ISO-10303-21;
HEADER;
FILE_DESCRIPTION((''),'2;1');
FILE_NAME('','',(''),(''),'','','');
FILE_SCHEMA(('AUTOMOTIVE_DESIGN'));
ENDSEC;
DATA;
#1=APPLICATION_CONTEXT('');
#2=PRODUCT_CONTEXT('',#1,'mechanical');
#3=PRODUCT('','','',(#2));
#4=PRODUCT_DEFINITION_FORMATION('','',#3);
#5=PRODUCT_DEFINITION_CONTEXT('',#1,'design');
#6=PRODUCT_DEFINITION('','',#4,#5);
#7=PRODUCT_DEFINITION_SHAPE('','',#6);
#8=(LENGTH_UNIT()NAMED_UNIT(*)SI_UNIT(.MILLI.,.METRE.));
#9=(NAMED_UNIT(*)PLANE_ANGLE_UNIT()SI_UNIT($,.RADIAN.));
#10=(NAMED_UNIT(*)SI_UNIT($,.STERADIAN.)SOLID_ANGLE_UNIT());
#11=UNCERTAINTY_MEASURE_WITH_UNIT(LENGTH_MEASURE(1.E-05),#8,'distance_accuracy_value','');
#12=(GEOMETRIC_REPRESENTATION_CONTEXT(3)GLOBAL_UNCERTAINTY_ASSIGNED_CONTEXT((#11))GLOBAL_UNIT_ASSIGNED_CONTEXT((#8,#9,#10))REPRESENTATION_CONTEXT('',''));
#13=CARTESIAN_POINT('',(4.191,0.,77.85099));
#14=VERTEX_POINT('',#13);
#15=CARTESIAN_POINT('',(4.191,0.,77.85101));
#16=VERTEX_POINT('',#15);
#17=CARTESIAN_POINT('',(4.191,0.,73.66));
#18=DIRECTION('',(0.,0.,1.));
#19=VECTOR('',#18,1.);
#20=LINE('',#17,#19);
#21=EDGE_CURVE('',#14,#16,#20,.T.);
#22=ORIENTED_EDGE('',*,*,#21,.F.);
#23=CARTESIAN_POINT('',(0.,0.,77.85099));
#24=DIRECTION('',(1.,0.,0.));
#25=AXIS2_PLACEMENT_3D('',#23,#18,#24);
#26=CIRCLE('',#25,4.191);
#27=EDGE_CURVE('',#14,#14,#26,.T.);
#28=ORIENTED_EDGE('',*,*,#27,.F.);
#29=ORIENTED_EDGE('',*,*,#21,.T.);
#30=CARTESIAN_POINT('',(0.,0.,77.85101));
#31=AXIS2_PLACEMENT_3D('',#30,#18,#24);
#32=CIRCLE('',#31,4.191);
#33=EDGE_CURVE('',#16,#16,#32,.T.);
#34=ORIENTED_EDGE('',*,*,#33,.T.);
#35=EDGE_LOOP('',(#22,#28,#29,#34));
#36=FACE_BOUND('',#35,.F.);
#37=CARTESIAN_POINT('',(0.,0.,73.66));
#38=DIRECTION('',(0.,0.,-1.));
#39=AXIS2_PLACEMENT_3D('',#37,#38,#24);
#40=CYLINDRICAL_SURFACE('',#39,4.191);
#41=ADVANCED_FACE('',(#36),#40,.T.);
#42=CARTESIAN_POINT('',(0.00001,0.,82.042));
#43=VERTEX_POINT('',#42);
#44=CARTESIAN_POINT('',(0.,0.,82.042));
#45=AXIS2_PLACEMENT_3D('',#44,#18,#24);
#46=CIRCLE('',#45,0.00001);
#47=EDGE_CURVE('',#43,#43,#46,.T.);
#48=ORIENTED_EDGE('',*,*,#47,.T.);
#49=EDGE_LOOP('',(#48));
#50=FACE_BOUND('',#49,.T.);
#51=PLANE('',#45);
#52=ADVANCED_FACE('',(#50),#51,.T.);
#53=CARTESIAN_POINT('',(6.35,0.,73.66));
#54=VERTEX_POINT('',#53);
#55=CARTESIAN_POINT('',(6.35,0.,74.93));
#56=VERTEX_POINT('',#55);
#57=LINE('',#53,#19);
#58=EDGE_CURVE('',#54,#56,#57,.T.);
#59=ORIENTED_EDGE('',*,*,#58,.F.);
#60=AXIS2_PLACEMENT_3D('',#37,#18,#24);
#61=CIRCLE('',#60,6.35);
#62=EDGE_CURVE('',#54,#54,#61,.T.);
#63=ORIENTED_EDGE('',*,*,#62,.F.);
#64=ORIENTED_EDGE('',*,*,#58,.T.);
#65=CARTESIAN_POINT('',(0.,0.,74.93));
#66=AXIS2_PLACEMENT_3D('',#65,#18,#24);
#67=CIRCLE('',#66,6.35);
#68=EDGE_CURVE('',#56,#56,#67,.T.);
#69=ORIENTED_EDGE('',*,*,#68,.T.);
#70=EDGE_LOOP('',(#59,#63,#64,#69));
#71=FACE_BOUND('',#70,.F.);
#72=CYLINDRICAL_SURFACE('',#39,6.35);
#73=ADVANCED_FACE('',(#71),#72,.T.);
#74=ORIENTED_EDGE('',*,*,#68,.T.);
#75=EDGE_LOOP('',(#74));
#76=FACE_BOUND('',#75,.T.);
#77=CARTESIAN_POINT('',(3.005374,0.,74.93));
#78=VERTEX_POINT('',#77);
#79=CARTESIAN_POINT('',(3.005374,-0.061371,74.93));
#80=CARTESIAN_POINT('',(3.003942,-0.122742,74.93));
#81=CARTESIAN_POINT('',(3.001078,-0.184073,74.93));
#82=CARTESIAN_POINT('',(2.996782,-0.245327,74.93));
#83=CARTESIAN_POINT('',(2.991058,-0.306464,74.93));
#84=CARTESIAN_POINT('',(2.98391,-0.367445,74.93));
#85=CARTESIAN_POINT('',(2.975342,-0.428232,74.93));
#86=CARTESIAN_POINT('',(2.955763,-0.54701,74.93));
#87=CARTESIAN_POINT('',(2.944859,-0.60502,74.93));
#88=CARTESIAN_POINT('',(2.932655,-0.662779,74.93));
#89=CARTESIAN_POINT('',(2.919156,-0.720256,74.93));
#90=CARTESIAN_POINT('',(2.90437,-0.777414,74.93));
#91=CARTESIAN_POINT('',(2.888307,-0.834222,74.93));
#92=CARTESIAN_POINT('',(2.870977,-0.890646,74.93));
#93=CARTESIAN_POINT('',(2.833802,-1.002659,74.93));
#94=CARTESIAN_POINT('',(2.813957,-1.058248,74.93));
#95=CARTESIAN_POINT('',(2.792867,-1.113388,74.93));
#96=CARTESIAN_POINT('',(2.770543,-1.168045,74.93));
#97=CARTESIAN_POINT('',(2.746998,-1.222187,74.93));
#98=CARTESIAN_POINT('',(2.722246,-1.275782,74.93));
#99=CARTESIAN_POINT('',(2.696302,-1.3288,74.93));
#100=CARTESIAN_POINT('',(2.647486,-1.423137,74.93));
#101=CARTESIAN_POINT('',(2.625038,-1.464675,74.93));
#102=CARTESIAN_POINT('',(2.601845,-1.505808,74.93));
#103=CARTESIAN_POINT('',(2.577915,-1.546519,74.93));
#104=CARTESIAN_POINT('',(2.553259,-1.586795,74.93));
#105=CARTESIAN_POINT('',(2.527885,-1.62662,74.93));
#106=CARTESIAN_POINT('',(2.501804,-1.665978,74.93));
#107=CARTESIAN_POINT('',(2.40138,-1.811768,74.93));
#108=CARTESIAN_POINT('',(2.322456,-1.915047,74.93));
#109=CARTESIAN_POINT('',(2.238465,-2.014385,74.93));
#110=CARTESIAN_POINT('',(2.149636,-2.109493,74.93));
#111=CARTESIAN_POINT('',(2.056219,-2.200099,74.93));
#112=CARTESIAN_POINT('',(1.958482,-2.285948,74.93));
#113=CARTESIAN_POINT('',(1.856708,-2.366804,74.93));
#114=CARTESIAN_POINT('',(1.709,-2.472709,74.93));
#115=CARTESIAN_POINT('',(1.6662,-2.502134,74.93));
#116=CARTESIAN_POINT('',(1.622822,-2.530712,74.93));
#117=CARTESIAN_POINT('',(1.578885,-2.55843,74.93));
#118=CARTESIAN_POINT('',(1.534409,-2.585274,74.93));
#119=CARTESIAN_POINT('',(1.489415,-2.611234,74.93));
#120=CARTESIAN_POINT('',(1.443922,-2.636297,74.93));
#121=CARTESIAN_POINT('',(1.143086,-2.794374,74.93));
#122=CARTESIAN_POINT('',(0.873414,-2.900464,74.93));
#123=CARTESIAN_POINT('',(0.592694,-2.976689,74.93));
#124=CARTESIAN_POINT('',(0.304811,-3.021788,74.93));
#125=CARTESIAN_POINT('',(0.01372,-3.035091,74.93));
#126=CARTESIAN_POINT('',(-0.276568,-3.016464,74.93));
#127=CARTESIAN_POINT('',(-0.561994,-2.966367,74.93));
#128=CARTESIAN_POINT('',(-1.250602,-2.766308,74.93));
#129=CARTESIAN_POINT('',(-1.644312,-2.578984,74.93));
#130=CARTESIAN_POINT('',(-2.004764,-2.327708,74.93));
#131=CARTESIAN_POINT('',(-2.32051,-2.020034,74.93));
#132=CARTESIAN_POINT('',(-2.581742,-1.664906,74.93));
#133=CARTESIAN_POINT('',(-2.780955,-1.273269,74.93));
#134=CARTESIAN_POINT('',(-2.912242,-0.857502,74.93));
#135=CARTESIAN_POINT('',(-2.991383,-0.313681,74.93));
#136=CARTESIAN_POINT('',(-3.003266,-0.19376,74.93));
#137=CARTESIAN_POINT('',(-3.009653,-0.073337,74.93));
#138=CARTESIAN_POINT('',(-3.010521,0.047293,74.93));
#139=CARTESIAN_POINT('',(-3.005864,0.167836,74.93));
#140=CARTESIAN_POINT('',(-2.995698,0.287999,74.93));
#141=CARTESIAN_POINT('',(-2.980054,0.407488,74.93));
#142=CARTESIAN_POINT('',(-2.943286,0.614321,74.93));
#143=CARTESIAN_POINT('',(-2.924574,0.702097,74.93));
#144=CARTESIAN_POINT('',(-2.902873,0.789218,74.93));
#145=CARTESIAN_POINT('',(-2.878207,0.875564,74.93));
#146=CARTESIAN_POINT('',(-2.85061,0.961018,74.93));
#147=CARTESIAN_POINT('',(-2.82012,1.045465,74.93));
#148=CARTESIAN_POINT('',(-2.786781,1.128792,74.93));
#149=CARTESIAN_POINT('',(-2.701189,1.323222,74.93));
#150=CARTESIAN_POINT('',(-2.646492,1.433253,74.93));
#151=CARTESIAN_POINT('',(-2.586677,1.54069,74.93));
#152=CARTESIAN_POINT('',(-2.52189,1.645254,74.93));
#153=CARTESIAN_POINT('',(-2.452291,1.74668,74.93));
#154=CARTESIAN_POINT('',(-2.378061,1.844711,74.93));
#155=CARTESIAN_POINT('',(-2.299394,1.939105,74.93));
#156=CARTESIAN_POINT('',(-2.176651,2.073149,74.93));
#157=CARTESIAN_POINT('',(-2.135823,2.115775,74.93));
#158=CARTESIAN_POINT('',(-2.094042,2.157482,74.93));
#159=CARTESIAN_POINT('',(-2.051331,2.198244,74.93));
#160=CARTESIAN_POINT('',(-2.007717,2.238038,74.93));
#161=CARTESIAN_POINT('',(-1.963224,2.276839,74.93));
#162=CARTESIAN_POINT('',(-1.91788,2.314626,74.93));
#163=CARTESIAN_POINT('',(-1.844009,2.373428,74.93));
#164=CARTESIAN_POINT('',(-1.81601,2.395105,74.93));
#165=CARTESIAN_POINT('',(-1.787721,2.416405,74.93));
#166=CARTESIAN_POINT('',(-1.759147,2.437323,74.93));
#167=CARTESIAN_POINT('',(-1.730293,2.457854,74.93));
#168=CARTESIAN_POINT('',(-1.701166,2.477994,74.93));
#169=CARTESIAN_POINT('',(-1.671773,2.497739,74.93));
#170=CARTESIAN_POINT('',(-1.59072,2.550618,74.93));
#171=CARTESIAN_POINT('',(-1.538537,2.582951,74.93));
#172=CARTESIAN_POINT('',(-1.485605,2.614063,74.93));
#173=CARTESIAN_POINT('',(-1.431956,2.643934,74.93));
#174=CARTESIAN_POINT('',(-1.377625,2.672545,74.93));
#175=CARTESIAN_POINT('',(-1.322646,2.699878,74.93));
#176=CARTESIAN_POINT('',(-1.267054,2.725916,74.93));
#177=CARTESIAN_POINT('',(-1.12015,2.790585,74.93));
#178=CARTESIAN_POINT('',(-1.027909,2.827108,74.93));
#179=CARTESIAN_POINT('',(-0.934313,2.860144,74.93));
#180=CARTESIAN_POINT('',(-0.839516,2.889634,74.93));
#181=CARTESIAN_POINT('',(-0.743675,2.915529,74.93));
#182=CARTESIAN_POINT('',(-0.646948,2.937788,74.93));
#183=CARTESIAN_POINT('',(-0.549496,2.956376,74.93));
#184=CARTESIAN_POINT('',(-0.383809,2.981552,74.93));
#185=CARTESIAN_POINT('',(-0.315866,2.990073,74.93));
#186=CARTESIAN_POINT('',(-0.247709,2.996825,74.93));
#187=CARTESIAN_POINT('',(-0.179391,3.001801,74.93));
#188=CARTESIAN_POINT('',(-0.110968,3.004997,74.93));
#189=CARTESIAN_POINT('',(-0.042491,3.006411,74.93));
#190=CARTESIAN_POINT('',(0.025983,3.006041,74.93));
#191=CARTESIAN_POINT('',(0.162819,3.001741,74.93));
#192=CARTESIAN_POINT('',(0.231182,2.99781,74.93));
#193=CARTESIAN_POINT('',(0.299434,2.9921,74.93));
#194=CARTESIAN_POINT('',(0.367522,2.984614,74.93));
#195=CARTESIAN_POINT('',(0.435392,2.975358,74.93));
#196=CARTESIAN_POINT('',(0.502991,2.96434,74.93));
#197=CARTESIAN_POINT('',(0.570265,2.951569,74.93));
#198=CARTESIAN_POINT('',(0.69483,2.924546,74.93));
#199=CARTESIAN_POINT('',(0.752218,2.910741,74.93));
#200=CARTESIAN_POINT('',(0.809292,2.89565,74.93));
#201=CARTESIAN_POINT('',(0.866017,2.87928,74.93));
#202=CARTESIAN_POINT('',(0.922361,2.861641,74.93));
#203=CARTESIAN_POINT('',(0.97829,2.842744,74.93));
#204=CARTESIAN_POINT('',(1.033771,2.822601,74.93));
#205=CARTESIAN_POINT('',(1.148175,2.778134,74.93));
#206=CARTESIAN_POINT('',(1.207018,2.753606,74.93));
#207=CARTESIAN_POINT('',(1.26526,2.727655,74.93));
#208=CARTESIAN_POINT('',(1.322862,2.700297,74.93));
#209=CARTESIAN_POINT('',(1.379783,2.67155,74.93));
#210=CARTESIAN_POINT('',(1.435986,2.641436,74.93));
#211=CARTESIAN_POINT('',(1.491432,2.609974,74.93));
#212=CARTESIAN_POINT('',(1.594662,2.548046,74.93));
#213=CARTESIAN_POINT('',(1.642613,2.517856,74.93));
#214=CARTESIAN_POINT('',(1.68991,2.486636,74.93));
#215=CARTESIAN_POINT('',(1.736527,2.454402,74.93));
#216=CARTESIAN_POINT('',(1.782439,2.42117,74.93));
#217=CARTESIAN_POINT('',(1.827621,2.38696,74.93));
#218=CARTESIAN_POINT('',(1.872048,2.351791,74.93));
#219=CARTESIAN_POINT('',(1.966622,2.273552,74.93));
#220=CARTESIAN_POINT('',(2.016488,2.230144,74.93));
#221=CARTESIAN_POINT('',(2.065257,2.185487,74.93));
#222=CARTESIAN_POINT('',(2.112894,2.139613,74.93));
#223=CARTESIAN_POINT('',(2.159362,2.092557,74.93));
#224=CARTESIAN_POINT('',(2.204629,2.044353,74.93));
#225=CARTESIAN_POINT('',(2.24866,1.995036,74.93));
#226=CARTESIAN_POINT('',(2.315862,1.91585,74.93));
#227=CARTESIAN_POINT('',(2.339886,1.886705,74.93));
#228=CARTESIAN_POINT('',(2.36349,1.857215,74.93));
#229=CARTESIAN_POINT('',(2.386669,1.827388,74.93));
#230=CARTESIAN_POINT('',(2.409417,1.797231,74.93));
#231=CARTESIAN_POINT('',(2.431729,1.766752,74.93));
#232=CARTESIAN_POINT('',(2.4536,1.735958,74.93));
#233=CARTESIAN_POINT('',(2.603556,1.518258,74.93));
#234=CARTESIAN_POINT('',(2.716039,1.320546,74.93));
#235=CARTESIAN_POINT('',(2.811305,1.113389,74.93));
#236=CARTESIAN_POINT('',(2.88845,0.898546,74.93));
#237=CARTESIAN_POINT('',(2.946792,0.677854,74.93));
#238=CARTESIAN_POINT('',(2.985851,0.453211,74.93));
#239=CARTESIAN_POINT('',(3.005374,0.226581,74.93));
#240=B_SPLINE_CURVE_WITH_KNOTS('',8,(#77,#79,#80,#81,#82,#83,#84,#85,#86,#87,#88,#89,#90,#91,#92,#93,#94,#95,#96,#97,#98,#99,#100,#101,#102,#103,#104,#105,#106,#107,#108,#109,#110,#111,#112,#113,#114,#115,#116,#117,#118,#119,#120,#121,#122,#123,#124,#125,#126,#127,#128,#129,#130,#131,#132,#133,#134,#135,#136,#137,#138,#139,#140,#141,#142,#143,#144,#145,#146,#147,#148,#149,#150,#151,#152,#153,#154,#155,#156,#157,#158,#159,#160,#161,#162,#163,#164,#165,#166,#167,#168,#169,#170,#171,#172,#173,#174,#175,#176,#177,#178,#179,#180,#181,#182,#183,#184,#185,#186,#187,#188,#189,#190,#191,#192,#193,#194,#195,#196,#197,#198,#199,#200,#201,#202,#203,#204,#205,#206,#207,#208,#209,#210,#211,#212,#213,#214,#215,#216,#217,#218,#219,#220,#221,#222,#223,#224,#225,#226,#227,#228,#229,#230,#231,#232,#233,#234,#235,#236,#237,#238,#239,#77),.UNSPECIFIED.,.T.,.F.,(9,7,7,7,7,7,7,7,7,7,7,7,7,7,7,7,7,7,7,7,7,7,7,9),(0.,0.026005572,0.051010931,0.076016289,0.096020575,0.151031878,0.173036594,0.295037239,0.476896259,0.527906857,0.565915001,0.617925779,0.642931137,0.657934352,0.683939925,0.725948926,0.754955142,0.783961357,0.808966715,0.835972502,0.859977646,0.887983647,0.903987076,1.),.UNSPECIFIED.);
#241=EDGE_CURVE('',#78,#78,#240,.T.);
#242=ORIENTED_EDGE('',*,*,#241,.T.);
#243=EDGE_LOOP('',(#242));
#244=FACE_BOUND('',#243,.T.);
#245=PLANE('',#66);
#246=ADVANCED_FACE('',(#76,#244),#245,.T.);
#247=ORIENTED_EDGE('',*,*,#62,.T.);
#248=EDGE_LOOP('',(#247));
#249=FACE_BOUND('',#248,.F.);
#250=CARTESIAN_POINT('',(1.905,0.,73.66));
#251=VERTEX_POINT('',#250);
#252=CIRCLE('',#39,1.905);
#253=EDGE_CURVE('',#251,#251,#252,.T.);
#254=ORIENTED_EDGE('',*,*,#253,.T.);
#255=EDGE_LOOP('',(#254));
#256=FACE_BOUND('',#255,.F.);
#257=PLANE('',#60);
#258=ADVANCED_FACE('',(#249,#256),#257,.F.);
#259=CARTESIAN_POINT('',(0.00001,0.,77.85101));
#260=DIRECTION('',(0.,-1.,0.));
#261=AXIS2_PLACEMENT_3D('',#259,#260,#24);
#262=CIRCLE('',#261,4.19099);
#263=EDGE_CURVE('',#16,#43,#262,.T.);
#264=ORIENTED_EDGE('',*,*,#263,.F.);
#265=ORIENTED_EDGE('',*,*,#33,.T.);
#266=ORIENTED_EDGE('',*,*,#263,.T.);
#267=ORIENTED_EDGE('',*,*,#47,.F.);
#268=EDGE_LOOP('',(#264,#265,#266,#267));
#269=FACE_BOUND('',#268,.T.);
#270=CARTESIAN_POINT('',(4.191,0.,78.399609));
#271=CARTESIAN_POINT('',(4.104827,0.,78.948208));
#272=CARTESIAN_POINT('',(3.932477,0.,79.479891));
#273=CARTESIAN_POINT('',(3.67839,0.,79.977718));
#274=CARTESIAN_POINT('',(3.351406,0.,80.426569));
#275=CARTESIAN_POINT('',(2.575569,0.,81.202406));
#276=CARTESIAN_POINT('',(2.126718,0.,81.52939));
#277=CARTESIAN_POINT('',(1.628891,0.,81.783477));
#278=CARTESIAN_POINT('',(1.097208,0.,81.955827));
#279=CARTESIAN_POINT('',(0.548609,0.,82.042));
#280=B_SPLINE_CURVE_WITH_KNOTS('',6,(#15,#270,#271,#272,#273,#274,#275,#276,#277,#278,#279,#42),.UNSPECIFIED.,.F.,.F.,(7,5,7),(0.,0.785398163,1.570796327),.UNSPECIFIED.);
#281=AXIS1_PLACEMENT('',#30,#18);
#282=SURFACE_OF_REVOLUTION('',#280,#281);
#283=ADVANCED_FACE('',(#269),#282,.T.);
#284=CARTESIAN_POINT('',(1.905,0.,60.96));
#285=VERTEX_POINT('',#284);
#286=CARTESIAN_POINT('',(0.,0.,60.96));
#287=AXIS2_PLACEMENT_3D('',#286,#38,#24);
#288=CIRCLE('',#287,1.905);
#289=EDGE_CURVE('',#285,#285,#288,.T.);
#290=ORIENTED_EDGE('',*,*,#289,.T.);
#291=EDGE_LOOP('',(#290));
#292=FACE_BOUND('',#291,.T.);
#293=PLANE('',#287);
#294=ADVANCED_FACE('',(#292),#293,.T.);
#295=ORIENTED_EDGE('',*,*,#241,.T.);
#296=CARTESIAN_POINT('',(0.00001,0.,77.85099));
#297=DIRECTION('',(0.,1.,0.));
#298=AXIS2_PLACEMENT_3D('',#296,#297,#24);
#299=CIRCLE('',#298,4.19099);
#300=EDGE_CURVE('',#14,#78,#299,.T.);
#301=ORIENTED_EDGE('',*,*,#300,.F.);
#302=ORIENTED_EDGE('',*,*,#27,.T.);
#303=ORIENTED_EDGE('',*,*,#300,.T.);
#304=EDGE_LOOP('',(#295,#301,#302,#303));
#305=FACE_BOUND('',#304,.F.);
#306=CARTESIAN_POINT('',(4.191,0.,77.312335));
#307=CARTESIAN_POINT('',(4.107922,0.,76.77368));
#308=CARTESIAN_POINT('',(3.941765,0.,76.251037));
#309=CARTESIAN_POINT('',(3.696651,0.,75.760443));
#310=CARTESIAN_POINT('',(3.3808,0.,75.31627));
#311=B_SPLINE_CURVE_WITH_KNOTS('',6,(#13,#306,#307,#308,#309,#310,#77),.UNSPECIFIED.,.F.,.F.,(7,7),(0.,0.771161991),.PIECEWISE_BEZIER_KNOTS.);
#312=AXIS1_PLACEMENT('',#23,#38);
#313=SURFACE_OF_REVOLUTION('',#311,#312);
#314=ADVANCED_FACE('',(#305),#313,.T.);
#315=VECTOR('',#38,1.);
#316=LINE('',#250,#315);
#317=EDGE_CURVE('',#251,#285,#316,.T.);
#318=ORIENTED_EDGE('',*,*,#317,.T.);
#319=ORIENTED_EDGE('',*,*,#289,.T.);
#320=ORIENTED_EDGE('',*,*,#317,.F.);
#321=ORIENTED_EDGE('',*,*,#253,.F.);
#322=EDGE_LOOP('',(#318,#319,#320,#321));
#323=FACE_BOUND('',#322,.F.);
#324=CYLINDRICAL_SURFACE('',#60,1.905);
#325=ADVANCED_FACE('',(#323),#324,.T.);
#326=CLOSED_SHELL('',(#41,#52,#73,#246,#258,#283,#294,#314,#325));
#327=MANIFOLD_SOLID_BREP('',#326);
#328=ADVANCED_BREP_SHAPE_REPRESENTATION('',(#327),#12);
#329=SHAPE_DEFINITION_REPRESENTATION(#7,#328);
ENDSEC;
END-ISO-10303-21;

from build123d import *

# Parameters (mm, degrees)
F0_R      = 4.191
F1_DEPTH  = 73.66
F2_R      = 4.191
F3_DEPTH  = 8.382
F4_R      = 4.19099
F5_R      = 6.35
F6_DEPTH  = 1.27
F7_R      = 29.9024876922
F8_DEPTH  = 73.66
F9_R      = 1.905
F10_DEPTH = 12.7


# Not quite as in the source:
# - a fillet or chamfer is up to 0.001 mm smaller than in the source, because OpenCascade refuses the exact size


with BuildPart() as f1:
    # F0 (on Top) → F1 (new body)
    with BuildSketch(Plane.XY):
        Circle(F0_R)
    extrude(amount=F1_DEPTH)



with BuildPart() as f3:
    # F2 (on face) → F3 (new body)
    with BuildSketch(Plane.XY.offset(73.66)):
        Circle(F2_R)
    extrude(amount=F3_DEPTH)

    # F4 (radius 4.191 in the source; OpenCascade refuses exactly that, so slightly less here)
    f4_edges = [f3.edges().sort_by_distance(p)[0] for p in [
        (-4.191, 0, 73.66),
        (-4.191, 0, 82.042),
    ]]
    fillet(f4_edges, radius=F4_R)


with BuildPart() as f1_1:
    add(f1.part)

    add(f3.part)  # F6 merges F3
    # F5 (on face) → F6 (join)
    with BuildSketch(Plane.XY.offset(73.66)):
        Circle(F5_R)
    extrude(amount=F6_DEPTH)

    # F7 (on face) → F8 (cut)
    with BuildSketch(Plane(origin=(0, 0, 0), x_dir=(1, 0, 0), z_dir=(0, 0, -1))):
        Circle(F7_R)
    extrude(amount=-F8_DEPTH, mode=Mode.SUBTRACT)

    # F9 (on face) → F10 (join)
    with BuildSketch(Plane(origin=(0, 0, 73.66), x_dir=(1, 0, 0), z_dir=(0, 0, -1))):
        Circle(F9_R)
    extrude(amount=F10_DEPTH)


solid = f1_1.part
